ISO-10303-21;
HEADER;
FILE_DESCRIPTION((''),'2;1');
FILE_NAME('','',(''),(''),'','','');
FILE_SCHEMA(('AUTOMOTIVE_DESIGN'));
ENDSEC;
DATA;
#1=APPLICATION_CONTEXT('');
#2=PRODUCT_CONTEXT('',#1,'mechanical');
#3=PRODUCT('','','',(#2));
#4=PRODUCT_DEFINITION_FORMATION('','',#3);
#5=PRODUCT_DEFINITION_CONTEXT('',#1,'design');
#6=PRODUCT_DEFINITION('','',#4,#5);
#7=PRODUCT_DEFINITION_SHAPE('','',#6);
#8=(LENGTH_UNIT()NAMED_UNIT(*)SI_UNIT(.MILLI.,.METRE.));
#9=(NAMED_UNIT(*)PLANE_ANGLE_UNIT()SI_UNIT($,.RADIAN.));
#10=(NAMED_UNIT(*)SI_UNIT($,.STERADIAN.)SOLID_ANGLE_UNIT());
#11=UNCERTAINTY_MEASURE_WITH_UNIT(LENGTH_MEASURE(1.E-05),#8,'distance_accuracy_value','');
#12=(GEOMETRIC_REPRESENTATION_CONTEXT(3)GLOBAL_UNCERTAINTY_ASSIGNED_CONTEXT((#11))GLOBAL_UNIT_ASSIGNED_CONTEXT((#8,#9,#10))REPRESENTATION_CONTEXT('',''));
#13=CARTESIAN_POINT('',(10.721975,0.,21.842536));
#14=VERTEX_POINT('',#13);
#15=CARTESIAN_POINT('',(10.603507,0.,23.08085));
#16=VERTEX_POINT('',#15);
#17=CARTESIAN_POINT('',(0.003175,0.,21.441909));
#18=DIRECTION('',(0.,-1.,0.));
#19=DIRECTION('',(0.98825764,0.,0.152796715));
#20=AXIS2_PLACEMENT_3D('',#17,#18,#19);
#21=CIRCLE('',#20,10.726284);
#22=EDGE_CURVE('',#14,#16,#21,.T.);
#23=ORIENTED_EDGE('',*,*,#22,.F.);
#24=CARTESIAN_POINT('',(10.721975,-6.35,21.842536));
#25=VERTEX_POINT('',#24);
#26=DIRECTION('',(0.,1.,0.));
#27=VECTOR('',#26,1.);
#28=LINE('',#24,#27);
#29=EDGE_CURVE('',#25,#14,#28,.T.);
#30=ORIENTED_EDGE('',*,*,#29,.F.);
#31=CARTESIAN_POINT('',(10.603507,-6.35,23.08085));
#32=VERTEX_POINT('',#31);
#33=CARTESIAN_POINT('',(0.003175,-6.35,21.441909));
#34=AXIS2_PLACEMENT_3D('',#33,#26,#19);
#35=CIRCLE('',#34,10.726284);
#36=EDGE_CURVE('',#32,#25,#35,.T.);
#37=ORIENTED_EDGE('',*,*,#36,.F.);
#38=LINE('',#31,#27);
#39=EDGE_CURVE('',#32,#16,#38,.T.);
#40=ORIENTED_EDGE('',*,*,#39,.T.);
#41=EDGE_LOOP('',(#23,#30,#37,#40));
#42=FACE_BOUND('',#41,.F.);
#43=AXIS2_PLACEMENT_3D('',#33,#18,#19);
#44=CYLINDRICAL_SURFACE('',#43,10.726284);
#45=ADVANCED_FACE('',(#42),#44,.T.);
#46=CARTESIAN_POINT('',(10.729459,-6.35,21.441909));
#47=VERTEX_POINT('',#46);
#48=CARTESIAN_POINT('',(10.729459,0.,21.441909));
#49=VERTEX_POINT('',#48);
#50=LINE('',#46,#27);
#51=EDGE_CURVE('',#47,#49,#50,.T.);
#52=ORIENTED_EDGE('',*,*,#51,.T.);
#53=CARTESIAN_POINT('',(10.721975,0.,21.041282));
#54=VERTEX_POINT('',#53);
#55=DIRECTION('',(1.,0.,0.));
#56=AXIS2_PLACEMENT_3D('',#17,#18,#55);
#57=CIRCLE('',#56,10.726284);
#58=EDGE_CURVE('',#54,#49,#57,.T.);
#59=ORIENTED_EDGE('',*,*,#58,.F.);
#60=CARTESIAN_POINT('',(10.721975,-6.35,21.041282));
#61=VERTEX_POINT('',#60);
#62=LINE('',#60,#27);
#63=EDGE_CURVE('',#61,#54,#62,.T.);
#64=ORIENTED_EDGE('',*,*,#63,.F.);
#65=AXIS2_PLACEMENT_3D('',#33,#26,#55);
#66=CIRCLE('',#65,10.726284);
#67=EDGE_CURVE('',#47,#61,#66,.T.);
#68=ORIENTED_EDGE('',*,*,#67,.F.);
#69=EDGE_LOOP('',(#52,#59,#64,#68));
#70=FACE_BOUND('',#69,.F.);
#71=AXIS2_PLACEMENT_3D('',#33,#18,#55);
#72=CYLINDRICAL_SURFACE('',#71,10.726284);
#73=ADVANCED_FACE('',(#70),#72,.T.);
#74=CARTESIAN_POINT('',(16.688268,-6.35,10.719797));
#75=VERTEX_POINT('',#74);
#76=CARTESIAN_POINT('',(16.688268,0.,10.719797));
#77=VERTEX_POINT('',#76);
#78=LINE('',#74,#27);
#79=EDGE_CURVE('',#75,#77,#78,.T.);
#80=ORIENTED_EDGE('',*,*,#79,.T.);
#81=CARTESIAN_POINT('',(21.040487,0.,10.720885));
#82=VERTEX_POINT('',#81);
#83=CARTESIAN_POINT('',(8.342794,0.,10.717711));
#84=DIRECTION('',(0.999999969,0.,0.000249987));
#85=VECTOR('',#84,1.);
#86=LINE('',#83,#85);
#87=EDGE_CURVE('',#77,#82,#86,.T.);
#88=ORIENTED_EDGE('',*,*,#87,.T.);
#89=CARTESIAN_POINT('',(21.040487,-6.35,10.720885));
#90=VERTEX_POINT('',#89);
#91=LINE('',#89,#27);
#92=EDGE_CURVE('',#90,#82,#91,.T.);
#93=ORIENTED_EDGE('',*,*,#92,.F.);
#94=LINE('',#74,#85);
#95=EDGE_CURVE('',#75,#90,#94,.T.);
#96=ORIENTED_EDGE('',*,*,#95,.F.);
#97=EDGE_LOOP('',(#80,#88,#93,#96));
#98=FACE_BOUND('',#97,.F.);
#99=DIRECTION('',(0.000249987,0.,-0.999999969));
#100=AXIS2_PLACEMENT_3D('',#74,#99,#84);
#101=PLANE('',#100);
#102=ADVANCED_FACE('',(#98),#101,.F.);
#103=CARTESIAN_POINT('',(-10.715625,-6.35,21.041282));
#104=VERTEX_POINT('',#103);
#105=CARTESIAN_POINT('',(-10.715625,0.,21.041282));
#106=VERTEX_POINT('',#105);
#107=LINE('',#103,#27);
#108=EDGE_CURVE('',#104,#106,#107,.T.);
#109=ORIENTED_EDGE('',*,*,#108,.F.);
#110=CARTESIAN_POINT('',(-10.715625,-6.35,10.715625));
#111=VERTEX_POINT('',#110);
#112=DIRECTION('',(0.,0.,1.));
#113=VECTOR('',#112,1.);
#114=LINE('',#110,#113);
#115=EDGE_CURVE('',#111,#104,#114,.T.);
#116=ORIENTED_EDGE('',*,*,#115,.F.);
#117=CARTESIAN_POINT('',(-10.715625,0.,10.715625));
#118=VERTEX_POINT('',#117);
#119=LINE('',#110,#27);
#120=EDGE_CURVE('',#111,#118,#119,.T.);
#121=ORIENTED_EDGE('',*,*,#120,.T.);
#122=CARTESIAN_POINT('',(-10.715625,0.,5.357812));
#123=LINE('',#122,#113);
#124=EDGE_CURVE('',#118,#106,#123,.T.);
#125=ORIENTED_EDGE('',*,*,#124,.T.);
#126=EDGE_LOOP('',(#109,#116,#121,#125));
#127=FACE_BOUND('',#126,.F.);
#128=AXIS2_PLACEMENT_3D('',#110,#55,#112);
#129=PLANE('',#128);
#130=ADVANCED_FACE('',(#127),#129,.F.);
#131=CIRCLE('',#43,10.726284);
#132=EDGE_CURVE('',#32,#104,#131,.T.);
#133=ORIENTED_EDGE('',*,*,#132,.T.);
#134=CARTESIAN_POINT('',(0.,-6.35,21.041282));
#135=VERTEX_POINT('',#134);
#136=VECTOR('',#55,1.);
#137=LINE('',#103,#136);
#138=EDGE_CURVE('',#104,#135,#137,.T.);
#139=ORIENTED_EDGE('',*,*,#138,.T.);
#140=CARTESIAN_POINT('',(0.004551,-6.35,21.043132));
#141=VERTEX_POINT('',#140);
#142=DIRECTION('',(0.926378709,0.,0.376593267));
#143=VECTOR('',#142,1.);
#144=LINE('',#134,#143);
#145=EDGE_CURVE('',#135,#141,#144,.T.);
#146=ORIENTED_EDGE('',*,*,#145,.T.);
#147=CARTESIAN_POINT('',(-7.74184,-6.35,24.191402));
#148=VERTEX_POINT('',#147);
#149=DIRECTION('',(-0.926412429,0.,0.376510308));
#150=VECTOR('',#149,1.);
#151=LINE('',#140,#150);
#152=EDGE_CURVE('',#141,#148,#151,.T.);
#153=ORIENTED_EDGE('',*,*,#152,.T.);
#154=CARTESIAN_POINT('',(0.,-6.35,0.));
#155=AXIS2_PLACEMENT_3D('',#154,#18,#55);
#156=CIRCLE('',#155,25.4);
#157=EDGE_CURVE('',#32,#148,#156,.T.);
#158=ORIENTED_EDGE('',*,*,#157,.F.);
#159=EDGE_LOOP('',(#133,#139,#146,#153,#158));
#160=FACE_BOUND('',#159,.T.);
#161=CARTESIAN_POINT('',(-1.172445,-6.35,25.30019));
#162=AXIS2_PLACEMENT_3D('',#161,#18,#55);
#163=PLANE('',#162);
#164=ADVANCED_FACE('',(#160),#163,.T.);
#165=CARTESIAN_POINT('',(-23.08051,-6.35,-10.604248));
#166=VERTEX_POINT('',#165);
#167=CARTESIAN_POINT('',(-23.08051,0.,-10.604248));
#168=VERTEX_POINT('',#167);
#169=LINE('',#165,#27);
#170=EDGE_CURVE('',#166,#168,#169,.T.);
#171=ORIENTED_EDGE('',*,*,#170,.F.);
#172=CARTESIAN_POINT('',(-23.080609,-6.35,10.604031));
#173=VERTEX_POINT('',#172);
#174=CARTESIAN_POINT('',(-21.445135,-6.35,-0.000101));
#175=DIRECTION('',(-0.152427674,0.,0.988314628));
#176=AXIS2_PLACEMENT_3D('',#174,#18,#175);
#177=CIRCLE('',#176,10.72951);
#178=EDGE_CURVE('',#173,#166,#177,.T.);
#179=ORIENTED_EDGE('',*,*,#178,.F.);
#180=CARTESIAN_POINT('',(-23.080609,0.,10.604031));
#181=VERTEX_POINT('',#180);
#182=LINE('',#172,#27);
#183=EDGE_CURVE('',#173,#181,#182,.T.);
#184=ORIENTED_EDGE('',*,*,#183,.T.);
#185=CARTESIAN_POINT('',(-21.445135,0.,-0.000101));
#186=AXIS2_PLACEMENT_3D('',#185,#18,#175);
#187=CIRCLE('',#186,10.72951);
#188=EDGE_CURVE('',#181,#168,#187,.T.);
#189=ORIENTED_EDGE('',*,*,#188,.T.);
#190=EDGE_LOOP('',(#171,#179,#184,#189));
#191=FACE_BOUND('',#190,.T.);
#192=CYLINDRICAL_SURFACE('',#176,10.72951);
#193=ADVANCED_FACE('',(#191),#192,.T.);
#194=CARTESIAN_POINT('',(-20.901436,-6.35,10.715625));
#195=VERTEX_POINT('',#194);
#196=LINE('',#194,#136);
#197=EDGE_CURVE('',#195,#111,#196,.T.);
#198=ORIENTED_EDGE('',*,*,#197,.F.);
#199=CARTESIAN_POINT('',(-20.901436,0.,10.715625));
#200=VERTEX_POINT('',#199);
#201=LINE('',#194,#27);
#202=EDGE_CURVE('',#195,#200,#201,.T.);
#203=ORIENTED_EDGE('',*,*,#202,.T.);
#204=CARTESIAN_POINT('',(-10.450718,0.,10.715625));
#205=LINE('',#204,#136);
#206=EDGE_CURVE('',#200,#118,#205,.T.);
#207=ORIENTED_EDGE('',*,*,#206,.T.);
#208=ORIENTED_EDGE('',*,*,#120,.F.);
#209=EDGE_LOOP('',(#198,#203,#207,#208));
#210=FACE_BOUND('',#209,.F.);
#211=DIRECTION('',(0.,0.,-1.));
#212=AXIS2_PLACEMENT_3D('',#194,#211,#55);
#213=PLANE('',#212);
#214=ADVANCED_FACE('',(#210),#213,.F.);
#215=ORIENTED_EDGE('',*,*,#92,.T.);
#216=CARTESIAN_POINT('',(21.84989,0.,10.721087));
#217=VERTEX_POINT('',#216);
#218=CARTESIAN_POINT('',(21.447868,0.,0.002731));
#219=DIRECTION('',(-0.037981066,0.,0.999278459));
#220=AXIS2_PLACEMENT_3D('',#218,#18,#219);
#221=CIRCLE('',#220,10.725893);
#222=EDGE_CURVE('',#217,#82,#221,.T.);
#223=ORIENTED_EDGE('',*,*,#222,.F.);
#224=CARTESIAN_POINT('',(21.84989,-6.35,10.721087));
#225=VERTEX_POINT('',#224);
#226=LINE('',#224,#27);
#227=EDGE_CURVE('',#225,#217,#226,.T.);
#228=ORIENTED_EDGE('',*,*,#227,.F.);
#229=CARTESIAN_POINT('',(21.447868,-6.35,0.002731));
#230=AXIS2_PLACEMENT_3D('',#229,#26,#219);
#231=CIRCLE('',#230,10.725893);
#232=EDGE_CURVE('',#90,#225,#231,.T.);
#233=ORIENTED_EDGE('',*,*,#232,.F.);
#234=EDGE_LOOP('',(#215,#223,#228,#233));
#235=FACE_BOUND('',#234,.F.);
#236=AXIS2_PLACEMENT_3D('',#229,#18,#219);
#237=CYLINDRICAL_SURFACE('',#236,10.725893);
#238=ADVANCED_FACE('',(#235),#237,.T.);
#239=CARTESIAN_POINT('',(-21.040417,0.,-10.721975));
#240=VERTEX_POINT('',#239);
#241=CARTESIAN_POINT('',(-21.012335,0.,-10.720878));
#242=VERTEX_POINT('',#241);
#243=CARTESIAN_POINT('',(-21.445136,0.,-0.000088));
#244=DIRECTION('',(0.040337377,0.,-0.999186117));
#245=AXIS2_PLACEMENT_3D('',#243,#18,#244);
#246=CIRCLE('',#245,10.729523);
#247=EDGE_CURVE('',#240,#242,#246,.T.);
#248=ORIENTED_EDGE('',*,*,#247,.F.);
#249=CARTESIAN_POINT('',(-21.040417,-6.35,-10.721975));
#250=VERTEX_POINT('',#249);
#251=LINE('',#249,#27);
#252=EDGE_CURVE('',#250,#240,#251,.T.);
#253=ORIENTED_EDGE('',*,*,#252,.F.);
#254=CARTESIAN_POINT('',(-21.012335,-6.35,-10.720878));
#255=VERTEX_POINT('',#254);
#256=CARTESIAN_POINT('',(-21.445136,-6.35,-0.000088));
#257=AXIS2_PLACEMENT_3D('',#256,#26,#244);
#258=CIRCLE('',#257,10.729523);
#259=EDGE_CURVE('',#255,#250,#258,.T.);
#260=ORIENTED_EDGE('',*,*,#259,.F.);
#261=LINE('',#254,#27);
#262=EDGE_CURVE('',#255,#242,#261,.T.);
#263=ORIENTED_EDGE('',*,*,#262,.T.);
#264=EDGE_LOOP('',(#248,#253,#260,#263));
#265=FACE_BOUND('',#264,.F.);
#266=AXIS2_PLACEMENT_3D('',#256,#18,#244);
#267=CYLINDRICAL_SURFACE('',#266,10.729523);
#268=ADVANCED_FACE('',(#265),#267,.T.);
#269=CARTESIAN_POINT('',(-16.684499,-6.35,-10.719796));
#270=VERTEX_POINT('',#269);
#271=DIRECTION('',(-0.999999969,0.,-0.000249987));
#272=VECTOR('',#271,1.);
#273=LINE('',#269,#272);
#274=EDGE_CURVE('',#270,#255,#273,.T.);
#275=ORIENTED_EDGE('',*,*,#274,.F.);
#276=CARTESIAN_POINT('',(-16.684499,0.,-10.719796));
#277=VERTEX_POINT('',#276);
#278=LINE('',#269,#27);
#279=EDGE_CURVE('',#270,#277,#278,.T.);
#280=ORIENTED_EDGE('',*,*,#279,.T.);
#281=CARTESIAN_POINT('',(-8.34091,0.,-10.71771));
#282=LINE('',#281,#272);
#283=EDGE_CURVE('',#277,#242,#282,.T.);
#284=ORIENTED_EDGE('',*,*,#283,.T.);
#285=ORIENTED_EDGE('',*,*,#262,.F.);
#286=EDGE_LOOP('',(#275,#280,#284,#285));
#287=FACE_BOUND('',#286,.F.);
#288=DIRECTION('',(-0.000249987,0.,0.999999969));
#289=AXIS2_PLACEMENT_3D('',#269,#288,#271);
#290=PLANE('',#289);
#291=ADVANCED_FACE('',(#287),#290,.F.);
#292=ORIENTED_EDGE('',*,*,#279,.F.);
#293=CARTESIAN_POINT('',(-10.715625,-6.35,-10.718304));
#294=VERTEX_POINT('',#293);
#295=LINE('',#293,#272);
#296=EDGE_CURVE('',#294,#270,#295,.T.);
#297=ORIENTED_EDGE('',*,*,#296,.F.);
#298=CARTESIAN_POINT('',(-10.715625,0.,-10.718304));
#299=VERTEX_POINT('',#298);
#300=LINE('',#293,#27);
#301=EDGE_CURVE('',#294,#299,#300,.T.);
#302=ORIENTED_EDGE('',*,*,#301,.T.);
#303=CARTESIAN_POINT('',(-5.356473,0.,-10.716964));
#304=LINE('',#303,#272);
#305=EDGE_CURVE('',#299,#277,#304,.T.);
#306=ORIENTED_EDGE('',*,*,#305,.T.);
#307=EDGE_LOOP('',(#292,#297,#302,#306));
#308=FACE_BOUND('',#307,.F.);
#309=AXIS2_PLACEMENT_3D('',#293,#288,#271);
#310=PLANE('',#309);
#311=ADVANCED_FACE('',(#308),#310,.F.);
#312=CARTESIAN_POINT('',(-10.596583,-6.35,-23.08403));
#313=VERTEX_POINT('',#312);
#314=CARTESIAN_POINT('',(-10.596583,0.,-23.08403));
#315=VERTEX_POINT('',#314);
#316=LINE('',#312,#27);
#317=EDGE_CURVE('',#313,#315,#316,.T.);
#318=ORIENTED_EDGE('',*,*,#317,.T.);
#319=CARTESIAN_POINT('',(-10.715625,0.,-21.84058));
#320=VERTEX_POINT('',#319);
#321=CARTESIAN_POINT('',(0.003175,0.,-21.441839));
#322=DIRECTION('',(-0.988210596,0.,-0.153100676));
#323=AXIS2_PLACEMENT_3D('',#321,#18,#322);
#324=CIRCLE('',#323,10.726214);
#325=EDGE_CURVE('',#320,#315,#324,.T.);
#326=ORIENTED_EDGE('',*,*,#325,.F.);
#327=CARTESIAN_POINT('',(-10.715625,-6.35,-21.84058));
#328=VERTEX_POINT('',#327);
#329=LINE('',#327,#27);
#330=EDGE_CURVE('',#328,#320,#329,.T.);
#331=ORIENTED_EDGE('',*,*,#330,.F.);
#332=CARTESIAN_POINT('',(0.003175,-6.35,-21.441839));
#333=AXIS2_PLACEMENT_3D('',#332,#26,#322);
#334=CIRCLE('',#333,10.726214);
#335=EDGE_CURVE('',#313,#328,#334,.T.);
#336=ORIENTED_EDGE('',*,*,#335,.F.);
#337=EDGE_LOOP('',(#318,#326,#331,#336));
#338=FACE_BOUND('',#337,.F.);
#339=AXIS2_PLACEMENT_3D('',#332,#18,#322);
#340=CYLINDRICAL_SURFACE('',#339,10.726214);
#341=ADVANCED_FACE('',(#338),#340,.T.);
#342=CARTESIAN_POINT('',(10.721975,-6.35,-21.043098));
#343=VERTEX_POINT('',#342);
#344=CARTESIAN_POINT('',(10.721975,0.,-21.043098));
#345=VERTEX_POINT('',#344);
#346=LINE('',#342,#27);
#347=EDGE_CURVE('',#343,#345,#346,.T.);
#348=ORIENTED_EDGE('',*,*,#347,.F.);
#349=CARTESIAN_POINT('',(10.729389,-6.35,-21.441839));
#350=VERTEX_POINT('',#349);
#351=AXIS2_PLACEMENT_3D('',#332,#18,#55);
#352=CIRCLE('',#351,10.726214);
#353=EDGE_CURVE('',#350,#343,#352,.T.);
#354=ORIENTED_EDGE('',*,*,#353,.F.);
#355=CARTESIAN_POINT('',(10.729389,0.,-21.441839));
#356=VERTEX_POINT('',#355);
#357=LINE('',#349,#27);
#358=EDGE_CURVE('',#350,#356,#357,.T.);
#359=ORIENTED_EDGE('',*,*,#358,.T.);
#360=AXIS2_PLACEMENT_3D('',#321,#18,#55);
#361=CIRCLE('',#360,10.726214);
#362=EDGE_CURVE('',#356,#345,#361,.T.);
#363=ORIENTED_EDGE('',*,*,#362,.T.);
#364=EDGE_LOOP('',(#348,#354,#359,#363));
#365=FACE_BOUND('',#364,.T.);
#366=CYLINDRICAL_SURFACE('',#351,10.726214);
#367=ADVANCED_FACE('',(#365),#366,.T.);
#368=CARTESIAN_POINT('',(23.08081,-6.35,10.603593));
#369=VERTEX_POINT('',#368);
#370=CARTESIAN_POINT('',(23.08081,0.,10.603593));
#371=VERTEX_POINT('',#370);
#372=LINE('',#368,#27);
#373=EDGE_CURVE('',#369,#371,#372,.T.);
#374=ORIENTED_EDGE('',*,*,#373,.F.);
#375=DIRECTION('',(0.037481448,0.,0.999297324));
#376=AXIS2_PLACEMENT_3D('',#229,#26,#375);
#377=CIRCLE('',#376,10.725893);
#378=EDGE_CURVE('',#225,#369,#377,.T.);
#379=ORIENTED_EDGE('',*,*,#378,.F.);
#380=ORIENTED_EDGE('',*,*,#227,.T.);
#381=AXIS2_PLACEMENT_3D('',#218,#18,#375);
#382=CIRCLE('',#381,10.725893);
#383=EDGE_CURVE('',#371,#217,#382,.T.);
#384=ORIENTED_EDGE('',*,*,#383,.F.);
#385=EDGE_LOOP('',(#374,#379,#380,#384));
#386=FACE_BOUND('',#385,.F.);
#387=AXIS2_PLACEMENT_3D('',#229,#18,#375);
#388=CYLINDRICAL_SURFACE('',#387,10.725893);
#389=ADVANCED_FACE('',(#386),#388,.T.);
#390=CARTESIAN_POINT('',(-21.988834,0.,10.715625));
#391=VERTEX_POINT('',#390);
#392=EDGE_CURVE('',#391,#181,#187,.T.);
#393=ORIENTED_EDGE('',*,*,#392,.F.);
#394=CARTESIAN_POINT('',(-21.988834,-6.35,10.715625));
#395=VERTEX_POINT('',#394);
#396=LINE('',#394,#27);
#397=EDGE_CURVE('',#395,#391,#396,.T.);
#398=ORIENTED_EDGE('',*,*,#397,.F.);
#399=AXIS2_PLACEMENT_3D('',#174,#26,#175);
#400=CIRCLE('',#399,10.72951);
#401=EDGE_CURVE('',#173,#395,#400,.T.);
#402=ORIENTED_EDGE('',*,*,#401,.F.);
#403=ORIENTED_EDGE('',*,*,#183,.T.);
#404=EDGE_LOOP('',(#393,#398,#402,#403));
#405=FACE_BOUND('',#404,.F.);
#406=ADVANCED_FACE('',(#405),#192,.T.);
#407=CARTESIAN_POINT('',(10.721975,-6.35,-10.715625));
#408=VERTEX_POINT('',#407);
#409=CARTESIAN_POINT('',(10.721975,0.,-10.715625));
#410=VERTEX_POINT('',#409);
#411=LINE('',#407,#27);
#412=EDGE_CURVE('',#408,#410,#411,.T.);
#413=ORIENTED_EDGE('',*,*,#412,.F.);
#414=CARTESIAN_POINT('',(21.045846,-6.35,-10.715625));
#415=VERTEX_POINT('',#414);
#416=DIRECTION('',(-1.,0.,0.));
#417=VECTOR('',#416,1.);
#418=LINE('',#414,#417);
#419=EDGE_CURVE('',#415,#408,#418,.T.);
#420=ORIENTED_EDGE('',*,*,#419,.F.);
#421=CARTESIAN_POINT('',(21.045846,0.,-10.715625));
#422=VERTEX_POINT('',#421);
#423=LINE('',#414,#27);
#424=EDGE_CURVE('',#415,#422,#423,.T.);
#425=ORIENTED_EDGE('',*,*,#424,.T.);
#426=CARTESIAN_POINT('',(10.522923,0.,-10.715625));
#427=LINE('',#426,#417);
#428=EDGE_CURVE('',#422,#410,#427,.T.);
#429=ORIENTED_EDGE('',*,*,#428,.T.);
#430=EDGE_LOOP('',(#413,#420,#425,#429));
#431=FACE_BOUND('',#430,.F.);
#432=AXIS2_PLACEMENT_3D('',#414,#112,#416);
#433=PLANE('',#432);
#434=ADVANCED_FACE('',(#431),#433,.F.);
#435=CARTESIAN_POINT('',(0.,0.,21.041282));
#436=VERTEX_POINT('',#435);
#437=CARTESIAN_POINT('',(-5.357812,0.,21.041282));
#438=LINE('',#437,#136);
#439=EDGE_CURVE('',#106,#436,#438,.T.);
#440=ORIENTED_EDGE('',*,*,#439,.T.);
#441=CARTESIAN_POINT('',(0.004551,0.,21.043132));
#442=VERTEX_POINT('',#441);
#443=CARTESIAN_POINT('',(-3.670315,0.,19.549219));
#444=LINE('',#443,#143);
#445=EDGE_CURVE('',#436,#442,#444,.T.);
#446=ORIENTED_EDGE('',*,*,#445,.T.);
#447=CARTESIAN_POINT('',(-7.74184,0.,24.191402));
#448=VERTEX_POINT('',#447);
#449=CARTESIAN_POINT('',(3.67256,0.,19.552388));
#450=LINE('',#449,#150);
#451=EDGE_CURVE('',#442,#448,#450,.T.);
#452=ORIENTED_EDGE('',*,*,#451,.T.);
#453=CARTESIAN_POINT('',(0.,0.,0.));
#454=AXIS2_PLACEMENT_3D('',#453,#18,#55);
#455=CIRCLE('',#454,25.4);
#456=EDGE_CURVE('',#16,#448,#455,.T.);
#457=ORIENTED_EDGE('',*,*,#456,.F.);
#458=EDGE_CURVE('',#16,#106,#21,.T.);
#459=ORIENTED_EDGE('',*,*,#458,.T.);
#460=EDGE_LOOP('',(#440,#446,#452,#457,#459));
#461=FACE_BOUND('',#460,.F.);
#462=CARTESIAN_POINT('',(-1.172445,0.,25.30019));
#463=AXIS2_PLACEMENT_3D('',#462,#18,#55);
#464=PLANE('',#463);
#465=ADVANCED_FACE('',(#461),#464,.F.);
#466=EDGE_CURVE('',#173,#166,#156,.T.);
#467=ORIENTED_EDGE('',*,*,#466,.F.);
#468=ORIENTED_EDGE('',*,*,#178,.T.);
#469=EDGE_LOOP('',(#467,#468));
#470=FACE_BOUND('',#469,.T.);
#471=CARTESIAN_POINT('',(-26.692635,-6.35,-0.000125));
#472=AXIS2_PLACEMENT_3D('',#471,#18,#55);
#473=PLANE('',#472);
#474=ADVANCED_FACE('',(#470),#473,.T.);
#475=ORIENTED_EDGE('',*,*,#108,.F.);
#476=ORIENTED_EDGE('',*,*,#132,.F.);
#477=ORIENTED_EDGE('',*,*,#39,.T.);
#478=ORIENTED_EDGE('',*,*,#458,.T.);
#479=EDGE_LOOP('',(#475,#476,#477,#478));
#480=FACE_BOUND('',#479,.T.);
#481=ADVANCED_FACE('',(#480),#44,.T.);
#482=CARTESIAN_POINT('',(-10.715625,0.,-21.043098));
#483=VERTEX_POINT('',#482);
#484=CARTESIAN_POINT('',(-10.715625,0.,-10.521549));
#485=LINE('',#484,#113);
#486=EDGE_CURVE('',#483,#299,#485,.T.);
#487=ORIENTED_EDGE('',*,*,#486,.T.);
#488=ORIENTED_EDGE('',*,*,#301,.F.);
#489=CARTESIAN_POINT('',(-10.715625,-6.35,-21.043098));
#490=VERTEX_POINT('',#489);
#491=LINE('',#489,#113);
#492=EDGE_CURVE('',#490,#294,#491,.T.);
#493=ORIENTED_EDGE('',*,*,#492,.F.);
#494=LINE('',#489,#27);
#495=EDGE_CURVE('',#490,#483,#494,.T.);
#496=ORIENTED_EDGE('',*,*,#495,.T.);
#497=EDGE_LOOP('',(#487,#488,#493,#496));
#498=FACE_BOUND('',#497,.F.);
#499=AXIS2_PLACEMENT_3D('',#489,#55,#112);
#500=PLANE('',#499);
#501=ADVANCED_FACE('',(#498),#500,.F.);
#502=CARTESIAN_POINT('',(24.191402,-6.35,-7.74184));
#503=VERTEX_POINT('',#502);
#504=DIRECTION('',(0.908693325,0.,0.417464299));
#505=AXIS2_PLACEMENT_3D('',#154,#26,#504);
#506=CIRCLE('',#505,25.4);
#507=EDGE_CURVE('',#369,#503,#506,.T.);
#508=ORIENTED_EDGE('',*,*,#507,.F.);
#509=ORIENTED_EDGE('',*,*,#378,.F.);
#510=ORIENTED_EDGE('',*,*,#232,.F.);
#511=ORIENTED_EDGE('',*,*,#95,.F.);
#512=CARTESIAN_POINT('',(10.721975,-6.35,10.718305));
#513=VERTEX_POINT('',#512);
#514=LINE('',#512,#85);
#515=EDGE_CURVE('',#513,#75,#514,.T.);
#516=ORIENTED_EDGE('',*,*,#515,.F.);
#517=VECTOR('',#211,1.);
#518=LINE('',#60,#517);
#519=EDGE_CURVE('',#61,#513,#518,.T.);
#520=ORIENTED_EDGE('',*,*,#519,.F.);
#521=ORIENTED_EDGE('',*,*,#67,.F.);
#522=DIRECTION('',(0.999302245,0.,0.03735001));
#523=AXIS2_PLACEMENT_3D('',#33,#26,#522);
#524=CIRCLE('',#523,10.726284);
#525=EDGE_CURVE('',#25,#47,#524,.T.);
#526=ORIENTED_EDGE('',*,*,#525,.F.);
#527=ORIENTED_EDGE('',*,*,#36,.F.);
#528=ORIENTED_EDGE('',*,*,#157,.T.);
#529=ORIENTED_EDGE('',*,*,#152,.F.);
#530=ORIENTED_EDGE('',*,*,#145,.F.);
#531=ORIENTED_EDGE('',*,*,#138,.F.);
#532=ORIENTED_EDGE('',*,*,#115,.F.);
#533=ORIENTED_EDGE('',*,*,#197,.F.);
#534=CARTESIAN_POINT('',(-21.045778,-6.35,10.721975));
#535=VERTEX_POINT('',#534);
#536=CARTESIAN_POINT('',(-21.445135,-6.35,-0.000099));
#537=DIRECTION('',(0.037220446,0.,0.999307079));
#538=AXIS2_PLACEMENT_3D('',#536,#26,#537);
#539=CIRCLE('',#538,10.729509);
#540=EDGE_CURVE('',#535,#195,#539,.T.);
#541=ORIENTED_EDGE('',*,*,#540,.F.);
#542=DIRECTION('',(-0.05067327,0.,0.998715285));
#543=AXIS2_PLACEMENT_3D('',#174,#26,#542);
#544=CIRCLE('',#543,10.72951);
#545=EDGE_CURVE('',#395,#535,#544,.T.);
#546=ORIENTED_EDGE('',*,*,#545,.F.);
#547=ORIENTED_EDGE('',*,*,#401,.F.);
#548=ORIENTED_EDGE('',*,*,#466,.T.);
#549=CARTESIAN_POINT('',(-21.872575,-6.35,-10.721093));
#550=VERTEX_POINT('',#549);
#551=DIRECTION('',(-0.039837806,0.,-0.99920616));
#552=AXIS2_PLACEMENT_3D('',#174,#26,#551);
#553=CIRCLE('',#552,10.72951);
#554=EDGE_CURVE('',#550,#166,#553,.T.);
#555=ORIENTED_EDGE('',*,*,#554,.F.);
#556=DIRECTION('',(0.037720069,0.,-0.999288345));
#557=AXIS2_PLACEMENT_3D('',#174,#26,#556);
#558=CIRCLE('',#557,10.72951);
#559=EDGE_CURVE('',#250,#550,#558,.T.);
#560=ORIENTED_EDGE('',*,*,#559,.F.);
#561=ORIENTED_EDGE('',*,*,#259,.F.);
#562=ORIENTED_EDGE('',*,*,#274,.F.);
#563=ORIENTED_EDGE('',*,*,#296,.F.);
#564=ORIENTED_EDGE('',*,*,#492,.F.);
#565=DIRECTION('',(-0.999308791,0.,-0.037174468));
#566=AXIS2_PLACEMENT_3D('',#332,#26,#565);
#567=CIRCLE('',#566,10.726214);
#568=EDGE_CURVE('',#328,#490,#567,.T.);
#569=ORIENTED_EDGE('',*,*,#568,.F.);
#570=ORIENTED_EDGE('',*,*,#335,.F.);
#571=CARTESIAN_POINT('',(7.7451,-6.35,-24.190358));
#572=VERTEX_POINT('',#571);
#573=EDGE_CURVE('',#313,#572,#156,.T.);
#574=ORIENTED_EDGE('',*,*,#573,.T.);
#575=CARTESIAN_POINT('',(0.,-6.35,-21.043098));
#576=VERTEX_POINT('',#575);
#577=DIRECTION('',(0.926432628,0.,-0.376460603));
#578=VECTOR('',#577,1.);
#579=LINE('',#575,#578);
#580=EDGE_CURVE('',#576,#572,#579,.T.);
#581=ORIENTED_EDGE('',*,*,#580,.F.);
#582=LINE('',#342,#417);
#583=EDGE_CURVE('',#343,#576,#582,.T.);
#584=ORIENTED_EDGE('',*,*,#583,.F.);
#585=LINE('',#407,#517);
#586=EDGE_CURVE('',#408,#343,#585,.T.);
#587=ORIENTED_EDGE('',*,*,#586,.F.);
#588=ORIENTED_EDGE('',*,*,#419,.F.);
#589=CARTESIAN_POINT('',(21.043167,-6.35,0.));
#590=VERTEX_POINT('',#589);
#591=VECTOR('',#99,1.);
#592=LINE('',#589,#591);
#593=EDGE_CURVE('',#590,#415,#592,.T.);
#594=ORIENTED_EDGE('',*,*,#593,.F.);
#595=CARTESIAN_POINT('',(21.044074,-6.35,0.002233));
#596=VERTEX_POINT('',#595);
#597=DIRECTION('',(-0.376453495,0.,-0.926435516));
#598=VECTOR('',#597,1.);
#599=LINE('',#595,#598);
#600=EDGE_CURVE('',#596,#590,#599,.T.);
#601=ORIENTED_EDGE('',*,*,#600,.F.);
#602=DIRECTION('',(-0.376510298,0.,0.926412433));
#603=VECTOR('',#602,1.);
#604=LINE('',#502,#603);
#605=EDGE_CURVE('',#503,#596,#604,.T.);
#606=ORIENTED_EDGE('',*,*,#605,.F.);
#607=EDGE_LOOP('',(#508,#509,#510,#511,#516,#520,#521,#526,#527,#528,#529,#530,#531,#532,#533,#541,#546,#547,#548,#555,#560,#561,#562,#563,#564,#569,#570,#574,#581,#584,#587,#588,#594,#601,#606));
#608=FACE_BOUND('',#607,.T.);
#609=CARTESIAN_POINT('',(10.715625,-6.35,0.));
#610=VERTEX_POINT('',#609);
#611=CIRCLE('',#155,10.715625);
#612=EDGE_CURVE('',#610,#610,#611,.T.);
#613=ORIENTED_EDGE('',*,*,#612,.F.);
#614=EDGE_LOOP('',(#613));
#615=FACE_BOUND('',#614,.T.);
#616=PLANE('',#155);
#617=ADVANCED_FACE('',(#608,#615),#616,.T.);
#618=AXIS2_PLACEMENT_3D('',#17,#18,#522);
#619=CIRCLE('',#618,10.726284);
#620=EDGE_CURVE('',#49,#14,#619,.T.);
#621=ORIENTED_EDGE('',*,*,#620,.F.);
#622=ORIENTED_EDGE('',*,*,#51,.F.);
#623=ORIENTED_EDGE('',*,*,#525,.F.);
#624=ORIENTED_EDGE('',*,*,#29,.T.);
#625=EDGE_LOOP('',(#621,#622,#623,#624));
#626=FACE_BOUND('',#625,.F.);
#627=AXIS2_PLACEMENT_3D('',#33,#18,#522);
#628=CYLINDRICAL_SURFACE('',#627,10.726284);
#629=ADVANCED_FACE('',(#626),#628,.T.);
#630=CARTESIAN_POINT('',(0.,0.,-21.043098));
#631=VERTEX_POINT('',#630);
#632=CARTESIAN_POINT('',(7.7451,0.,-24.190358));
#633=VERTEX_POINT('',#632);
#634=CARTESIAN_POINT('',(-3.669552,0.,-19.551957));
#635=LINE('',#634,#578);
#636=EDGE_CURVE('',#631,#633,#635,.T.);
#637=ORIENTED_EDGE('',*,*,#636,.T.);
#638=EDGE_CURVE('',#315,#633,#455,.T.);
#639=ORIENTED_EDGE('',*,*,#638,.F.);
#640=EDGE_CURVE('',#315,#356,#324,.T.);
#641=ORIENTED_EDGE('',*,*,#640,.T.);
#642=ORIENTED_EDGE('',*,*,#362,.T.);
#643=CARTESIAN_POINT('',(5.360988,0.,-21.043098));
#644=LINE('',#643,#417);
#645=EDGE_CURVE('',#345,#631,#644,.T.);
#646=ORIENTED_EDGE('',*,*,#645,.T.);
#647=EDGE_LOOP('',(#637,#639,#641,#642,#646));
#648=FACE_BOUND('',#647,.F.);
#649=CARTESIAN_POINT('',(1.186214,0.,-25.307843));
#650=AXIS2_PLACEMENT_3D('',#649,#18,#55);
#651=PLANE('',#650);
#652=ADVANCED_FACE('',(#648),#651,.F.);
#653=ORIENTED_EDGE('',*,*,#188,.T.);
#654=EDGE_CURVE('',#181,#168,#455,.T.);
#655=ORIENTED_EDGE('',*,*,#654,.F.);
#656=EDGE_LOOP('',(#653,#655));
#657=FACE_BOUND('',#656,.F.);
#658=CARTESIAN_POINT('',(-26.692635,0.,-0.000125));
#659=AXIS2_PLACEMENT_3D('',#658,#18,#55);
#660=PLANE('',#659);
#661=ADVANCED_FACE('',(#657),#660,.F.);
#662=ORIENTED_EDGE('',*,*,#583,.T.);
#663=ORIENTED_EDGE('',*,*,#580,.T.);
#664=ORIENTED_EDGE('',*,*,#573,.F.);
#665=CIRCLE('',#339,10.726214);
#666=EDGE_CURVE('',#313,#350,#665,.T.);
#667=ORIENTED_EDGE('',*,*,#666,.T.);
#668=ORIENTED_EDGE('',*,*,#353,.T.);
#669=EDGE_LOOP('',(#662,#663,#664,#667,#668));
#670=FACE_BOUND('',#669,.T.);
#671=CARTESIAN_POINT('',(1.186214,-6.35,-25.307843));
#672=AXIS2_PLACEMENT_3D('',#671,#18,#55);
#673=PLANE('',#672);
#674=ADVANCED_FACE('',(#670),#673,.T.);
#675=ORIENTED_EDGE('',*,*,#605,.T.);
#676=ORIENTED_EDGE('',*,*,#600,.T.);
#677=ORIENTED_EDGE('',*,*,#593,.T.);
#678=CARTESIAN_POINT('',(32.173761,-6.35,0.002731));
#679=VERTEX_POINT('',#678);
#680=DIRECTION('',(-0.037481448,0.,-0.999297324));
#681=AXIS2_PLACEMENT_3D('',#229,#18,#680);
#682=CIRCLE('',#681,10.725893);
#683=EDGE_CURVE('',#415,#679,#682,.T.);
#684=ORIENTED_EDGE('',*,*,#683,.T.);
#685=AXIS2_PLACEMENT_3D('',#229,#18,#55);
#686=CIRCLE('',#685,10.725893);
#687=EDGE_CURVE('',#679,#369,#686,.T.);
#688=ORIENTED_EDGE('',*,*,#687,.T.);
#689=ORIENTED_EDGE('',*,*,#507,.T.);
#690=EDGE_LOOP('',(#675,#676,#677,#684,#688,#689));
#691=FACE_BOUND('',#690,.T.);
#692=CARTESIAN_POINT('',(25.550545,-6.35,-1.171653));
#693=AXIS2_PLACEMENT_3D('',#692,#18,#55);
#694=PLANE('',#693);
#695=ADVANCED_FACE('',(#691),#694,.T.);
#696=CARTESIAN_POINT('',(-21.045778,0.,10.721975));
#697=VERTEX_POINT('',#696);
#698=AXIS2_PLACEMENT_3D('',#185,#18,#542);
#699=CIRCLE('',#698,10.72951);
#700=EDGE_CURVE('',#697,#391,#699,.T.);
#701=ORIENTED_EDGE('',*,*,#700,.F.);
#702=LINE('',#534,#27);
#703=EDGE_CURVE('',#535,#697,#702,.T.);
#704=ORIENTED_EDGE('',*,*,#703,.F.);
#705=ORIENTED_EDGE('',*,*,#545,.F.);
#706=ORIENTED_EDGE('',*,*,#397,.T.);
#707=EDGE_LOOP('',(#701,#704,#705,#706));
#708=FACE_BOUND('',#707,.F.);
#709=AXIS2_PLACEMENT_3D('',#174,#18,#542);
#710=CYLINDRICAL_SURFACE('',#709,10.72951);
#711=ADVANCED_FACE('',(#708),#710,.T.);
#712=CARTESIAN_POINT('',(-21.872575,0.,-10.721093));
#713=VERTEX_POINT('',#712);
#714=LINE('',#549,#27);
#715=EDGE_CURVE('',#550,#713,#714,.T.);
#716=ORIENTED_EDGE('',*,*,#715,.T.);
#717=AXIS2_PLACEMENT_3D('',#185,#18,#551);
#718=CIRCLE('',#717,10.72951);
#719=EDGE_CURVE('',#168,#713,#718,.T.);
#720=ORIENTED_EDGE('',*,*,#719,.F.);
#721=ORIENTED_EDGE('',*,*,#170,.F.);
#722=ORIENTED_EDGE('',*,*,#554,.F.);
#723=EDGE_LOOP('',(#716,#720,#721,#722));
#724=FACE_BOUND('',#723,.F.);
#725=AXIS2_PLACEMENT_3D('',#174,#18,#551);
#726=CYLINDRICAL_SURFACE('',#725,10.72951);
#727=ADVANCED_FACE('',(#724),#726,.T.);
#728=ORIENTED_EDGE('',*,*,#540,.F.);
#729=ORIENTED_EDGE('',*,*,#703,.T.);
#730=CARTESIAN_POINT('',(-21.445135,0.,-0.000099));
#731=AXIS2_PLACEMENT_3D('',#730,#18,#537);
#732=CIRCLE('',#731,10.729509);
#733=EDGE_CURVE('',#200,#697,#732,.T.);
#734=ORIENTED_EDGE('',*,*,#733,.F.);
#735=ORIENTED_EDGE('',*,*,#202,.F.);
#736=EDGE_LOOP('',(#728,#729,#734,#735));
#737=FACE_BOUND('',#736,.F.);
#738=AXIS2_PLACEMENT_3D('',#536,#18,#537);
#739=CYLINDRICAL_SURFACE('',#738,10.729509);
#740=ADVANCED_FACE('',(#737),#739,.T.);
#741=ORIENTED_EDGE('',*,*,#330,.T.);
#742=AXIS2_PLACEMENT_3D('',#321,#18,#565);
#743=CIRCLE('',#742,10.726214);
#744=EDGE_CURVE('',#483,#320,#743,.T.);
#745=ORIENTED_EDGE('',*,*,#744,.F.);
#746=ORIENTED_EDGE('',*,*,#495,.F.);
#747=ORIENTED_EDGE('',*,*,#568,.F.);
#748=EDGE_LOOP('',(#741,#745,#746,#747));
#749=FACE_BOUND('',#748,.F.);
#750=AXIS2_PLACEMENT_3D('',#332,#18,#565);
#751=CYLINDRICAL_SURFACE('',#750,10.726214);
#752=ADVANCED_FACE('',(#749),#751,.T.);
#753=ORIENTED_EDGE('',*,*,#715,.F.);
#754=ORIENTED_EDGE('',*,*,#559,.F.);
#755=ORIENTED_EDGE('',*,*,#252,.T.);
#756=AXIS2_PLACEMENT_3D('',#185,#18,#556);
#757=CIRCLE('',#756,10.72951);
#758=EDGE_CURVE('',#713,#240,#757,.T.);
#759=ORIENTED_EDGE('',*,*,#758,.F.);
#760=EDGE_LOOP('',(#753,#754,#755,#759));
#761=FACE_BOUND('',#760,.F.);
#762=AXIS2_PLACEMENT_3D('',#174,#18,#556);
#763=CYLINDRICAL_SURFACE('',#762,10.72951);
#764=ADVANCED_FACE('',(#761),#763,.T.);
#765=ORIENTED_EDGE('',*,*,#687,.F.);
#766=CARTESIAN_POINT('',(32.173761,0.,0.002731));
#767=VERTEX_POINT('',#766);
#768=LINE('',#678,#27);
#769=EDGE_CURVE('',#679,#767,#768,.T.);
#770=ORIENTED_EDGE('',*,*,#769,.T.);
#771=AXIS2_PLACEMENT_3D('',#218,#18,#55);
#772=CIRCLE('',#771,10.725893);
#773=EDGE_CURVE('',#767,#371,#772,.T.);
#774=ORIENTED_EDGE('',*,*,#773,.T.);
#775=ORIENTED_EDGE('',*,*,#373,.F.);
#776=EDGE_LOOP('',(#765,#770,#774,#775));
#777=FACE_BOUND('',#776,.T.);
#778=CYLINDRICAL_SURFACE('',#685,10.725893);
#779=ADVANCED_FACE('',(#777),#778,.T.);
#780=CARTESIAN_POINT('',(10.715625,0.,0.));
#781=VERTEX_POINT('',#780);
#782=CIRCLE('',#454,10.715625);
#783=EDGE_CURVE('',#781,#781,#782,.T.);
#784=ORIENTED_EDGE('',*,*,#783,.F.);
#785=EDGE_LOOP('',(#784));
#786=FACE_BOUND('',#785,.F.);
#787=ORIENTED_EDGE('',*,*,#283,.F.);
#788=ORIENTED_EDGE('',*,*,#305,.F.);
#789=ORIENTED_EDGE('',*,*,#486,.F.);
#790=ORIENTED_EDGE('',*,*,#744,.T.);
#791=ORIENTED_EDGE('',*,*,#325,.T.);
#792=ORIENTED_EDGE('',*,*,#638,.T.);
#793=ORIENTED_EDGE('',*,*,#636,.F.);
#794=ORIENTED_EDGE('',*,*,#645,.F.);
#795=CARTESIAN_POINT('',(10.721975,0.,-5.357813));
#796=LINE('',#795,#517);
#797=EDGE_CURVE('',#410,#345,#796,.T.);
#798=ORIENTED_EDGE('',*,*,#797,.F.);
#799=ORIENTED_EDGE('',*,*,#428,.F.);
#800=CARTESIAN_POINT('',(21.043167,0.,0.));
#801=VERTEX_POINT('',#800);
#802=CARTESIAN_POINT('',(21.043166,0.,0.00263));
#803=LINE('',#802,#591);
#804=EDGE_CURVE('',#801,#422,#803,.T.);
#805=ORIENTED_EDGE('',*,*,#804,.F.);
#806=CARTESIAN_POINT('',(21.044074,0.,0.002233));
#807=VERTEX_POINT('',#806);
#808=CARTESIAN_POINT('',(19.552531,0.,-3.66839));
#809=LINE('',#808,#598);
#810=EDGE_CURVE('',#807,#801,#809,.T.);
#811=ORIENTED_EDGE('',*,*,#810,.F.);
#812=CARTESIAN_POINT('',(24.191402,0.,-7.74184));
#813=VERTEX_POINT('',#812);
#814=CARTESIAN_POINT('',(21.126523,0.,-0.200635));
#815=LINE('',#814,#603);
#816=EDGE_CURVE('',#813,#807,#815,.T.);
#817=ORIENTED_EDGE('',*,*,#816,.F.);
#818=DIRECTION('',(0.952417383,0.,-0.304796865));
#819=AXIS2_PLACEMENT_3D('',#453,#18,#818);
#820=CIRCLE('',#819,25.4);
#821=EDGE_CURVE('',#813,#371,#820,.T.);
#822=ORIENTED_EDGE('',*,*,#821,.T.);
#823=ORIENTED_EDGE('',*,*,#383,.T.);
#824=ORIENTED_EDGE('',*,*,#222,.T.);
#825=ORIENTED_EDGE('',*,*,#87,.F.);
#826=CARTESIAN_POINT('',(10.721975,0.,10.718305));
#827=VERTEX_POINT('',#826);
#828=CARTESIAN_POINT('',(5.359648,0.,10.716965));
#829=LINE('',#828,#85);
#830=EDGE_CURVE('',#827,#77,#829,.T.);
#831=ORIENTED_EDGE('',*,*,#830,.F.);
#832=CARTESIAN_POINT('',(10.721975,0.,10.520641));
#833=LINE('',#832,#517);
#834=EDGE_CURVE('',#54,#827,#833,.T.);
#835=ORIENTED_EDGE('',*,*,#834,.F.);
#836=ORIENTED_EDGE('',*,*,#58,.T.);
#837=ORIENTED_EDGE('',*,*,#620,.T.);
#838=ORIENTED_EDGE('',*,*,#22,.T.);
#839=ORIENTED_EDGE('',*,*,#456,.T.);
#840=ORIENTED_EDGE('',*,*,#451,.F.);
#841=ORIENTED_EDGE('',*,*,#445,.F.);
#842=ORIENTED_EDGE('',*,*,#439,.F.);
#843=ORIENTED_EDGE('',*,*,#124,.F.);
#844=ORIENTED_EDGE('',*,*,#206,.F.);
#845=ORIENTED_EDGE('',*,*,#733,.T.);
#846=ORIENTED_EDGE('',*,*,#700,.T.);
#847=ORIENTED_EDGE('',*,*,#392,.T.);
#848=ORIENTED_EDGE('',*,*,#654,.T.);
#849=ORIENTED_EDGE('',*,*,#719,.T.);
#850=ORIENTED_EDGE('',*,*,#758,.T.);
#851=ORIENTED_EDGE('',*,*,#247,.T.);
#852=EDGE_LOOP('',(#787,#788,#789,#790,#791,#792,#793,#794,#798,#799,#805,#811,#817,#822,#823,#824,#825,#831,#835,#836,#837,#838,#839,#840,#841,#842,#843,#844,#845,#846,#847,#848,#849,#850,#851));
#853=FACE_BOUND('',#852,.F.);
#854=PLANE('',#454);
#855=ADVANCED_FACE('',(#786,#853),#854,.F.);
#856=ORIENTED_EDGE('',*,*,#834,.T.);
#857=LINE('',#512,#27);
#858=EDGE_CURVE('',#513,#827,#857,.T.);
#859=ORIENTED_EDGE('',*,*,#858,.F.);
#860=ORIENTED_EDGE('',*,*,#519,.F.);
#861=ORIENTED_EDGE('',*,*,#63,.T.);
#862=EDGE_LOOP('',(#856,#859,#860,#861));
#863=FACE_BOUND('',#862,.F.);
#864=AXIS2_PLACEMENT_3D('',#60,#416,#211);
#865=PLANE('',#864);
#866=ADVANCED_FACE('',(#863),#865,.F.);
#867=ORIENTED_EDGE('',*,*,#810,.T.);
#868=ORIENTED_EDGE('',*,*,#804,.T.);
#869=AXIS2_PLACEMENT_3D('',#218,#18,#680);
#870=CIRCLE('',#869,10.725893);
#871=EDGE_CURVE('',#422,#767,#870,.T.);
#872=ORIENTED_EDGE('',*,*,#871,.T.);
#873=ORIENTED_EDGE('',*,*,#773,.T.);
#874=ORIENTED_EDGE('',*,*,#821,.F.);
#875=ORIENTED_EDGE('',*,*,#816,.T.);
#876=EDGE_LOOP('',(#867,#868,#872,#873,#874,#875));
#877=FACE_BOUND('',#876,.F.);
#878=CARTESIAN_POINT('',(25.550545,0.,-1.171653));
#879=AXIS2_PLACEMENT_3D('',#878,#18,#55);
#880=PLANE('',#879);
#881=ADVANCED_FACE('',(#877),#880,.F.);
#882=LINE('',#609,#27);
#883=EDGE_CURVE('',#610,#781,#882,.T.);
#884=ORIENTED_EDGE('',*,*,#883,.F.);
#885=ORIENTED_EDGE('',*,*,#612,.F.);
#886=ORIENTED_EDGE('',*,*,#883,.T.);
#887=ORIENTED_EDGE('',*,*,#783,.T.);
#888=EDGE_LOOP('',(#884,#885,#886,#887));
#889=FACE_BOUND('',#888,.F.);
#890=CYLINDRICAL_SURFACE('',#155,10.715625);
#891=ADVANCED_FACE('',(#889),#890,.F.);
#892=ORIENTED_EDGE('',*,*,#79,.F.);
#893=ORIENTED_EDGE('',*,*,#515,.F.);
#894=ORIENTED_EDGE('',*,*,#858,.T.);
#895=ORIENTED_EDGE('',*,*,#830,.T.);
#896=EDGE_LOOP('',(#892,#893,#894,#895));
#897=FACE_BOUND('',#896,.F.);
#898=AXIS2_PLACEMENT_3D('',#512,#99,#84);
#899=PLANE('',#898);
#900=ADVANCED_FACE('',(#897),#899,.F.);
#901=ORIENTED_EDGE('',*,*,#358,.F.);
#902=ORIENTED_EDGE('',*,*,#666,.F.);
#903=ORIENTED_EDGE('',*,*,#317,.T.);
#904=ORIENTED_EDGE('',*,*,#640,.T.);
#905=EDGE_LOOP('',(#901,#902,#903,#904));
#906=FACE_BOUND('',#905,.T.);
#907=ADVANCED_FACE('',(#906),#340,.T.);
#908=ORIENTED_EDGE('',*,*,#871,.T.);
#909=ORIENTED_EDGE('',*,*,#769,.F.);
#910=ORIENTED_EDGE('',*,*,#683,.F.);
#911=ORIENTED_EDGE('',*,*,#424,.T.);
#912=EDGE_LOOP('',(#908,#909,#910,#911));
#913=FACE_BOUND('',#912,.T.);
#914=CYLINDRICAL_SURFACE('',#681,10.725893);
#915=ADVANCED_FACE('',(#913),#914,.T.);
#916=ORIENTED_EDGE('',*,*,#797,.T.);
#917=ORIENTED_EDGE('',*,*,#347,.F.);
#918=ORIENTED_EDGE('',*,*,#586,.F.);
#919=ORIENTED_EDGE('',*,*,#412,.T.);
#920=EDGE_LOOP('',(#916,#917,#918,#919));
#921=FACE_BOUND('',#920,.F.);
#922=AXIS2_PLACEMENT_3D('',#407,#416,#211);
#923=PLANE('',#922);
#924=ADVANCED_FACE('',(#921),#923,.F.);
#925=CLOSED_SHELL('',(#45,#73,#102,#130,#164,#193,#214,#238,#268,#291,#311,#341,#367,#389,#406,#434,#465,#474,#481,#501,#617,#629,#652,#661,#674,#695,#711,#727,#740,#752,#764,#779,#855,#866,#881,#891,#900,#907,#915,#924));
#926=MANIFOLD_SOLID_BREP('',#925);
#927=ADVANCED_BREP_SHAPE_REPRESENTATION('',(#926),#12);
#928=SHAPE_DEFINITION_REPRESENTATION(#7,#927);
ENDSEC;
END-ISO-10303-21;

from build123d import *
from build123d import SkipClean  # not in build123d's __all__

# Parameters (mm, degrees)
F0_R     = 25.4
F1_DEPTH = 6.35
F2_R     = 10.715625
F3_DEPTH = 6.351
F5_DEPTH = 6.351
F7_DEPTH = 6.35


# Not quite as in the source:
# - ends of sketch curves that miss each other by under 0.0002 mm in the source are joined


with BuildPart() as f1:
    # F0 (on Front) → F1 (new body)
    with BuildSketch(Plane.XZ):
        Circle(F0_R)
    extrude(amount=F1_DEPTH)

    # F2 (on face) → F3 (cut, through all)
    with BuildSketch(Plane.XZ.offset(6.35)):
        Circle(F2_R)
    extrude(amount=-F3_DEPTH, mode=Mode.SUBTRACT)

    # F4 (on face) → F5 (cut, through all)
    with BuildSketch(Plane.XZ.offset(6.35)):
        Polygon((-16.6851454689, 10.715625), (-10.715625, 10.715625), (-10.715625, 16.6851454689), (-14.959796627, 14.959796627), align=None)
        with BuildLine():
            Line((-14.959796627, 14.959796627), (-10.715625, 16.6851454689))
            Line((-10.715625, 16.6851454689), (-10.715625, 21.0412820273))
            ThreePointArc((-10.715625, 21.0412820273), (-10.7231093189, 21.441908849), (-10.715625, 21.8425356707))
            Line((-10.715625, 21.8425356707), (-10.715625, 23.0290117213))
            ThreePointArc((-10.715625, 23.0290117213), (-11.3239040523, 22.7360769926), (-11.9241826151, 22.4270789217))
            Line((-11.9241826151, 22.4270789217), (-14.959796627, 14.959796627))
        make_face()
        with BuildLine():
            Line((-20.9014356742, 10.715625), (-16.6851454689, 10.715625))
            Line((-16.6851454689, 10.715625), (-14.959796627, 14.959796627))
            Line((-14.959796627, 14.959796627), (-22.4270789217, 11.9241826151))
            ThreePointArc((-22.4270789217, 11.9241826151), (-22.7360769926, 11.3239040523), (-23.0290117213, 10.715625))
            Line((-23.0290117213, 10.715625), (-21.9888344018, 10.715625))
            ThreePointArc((-21.9888344018, 10.715625), (-21.517375938, 10.7291661682), (-21.0457778798, 10.7219746652))
            ThreePointArc((-21.0457778798, 10.7219746652), (-20.9735960889, 10.7190427964), (-20.9014356742, 10.715625))
        make_face()
        Polygon((-10.715625, -16.6889140547), (-10.715625, -10.7183040998), (-16.6844990564, -10.7197962397), (-14.9584916016, -14.9648416016), align=None)
        Polygon((10.721975, 16.6873822364), (10.721975, 10.7183053524), (16.6882676196, 10.7197968469), (14.9635371125, 14.9635367777), align=None)
        with BuildLine():
            ThreePointArc((-10.715625, 21.8425356707), (-10.7231093189, 21.441908849), (-10.715625, 21.0412820273))
            Line((-10.715625, 21.0412820273), (-10.715625, 21.8425356707))
        make_face()
        with BuildLine():
            Line((-10.715625, 21.8425356707), (-10.715625, 21.0412820273))
            Line((-10.715625, 21.0412820273), (0, 21.0412820273))
            Line((0, 21.0412820273), (0.0045507281, 21.0431319981))
            Line((0.0045507281, 21.0431319981), (-7.7418402479, 24.1914015629))
            ThreePointArc((-7.7418402479, 24.1914015629), (-9.1859591102, 23.6807549547), (-10.596671596, 23.0839890635))
            ThreePointArc((-10.596671596, 23.0839890635), (-10.6742064582, 22.4649926613), (-10.715625, 21.8425356707))
        make_face()
        with BuildLine():
            Line((-22.4270789217, 11.9241826151), (-14.959796627, 14.959796627))
            Line((-14.959796627, 14.959796627), (-11.9241826151, 22.4270789217))
            ThreePointArc((-11.9241826151, 22.4270789217), (-17.9605122421, 17.9605122421), (-22.4270789217, 11.9241826151))
        make_face()
        with BuildLine():
            Line((-10.715625, -21.0430976268), (-10.715625, -16.6889140547))
            Line((-10.715625, -16.6889140547), (-14.9584916016, -14.9648416016))
            Line((-14.9584916016, -14.9648416016), (-11.9244537164, -22.4269347787))
            ThreePointArc((-11.9244537164, -22.4269347787), (-11.3240414708, -22.7360085496), (-10.715625, -23.0290117213))
            Line((-10.715625, -23.0290117213), (-10.715625, -21.8405802232))
            ThreePointArc((-10.715625, -21.8405802232), (-10.7230390601, -21.441838925), (-10.715625, -21.0430976268))
        make_face()
        with BuildLine():
            Line((-14.9584916016, -14.9648416016), (-16.6844990564, -10.7197962397))
            Line((-16.6844990564, -10.7197962397), (-21.0123347342, -10.7208781415))
            ThreePointArc((-21.0123347342, -10.7208781415), (-21.0263755955, -10.7214357653), (-21.0404171751, -10.721975))
            ThreePointArc((-21.0404171751, -10.721975), (-21.4565047306, -10.7296046859), (-21.8725751819, -10.7210931903))
            Line((-21.8725751819, -10.7210931903), (-23.0263322368, -10.7213816143))
            ThreePointArc((-23.0263322368, -10.7213816143), (-22.7327836194, -11.3305140622), (-22.4231246927, -11.9316167813))
            Line((-22.4231246927, -11.9316167813), (-14.9584916016, -14.9648416016))
        make_face()
        Polygon((16.6889139739, -10.7156253348), (10.721975, -10.7156253348), (10.721975, -16.6836133856), (14.9648415328, -14.9584918676), align=None)
        with BuildLine():
            Line((10.721975, 21.0412820273), (10.721975, 16.6873822364))
            Line((10.721975, 16.6873822364), (14.9635371125, 14.9635367777))
            Line((14.9635371125, 14.9635367777), (11.9318881389, 22.4229802979))
            ThreePointArc((11.9318881389, 22.4229802979), (11.3309445253, 22.7325690621), (10.721975, 23.0260559389))
            Line((10.721975, 23.0260559389), (10.721975, 21.8425356707))
            ThreePointArc((10.721975, 21.8425356707), (10.727588076, 21.6422572114), (10.7294593189, 21.441908849))
            ThreePointArc((10.7294593189, 21.441908849), (10.727588076, 21.2415604866), (10.721975, 21.0412820273))
        make_face()
        with BuildLine():
            Line((14.9635371125, 14.9635367777), (16.6882676196, 10.7197968469))
            Line((16.6882676196, 10.7197968469), (21.0404868941, 10.7208848444))
            ThreePointArc((21.0404868941, 10.7208848444), (21.4451864116, 10.7286236807), (21.8498897476, 10.7210871844))
            Line((21.8498897476, 10.7210871844), (23.0263323927, 10.7213812796))
            ThreePointArc((23.0263323927, 10.7213812796), (22.7327152374, 11.3306512582), (22.4229804989, 11.9318877612))
            Line((22.4229804989, 11.9318877612), (14.9635371125, 14.9635367777))
        make_face()
        with BuildLine():
            Line((-10.715625, 23.0290117213), (-10.715625, 21.8425356707))
            ThreePointArc((-10.715625, 21.8425356707), (-10.6742064582, 22.4649926613), (-10.596671596, 23.0839890635))
            ThreePointArc((-10.596671596, 23.0839890635), (-10.6561837529, 23.0565771055), (-10.715625, 23.0290117213))
        make_face()
        with BuildLine():
            Line((-11.9244537164, -22.4269347787), (-14.9584916016, -14.9648416016))
            Line((-14.9584916016, -14.9648416016), (-22.4231246927, -11.9316167813))
            ThreePointArc((-22.4231246927, -11.9316167813), (-17.9576435149, -17.9633805112), (-11.9244537164, -22.4269347787))
        make_face()
        with BuildLine():
            Line((14.9648415328, -14.9584918676), (10.721975, -16.6836133856))
            Line((10.721975, -16.6836133856), (10.721975, -21.0430976268))
            ThreePointArc((10.721975, -21.0430976268), (10.7275353849, -21.2424338153), (10.7293890601, -21.441838925))
            ThreePointArc((10.7293890601, -21.441838925), (10.7275353849, -21.6412440348), (10.721975, -21.8405802232))
            Line((10.721975, -21.8405802232), (10.721975, -23.0260559389))
            ThreePointArc((10.721975, -23.0260559389), (11.3308069807, -22.7326376201), (11.9316167956, -22.4231246851))
            Line((11.9316167956, -22.4231246851), (14.9648415328, -14.9584918676))
        make_face()
        with BuildLine():
            Line((21.0458457391, -10.7156253348), (16.6889139739, -10.7156253348))
            Line((16.6889139739, -10.7156253348), (14.9648415328, -14.9584918676))
            Line((14.9648415328, -14.9584918676), (22.4269345702, -11.9244541084))
            ThreePointArc((22.4269345702, -11.9244541084), (22.7360083683, -11.3240418348), (23.0290115655, -10.7156253348))
            Line((23.0290115655, -10.7156253348), (21.8498897476, -10.7156253348))
            ThreePointArc((21.8498897476, -10.7156253348), (21.4478677434, -10.7231621662), (21.0458457391, -10.7156253348))
        make_face()
        with BuildLine():
            Line((10.721975, -21.0430976268), (0, -21.0430976268))
            Line((0, -21.0430976268), (7.7450996927, -24.1903582187))
            ThreePointArc((7.7450996927, -24.1903582187), (9.1910155426, -23.678792902), (10.6034192636, -23.0808903624))
            ThreePointArc((10.6034192636, -23.0808903624), (10.6807217402, -22.462458185), (10.721975, -21.8405802232))
            Line((10.721975, -21.8405802232), (10.721975, -21.0430976268))
        make_face()
        with BuildLine():
            ThreePointArc((10.7293890601, -21.441838925), (10.7275353849, -21.2424338153), (10.721975, -21.0430976268))
            Line((10.721975, -21.0430976268), (10.721975, -21.8405802232))
            ThreePointArc((10.721975, -21.8405802232), (10.7275353849, -21.6412440348), (10.7293890601, -21.441838925))
        make_face()
        with BuildLine():
            ThreePointArc((-23.0806092952, 10.6040310525), (-22.536149575, 10.6737961307), (-21.9888344018, 10.715625))
            Line((-21.9888344018, 10.715625), (-23.0290117213, 10.715625))
            ThreePointArc((-23.0290117213, 10.715625), (-23.0548780277, 10.6598592451), (-23.0806092952, 10.6040310525))
        make_face()
        with BuildLine():
            Line((11.9318881389, 22.4229802979), (14.9635371125, 14.9635367777))
            Line((14.9635371125, 14.9635367777), (22.4229804989, 11.9318877612))
            ThreePointArc((22.4229804989, 11.9318877612), (17.9605123934, 17.9605120909), (11.9318881389, 22.4229802979))
        make_face()
        with BuildLine():
            ThreePointArc((10.6035074316, 23.0808498576), (10.6807078337, 22.4634116022), (10.721975, 21.8425356707))
            Line((10.721975, 21.8425356707), (10.721975, 23.0260559389))
            ThreePointArc((10.721975, 23.0260559389), (10.6627764128, 23.053528996), (10.6035074316, 23.0808498576))
        make_face()
        with BuildLine():
            ThreePointArc((-10.5965833938, -23.0840295525), (-10.674220495, -22.4640392514), (-10.715625, -21.8405802232))
            Line((-10.715625, -21.8405802232), (-10.715625, -23.0290117213))
            ThreePointArc((-10.715625, -23.0290117213), (-10.6561397042, -23.0565974637), (-10.5965833938, -23.0840295525))
        make_face()
        with BuildLine():
            Line((-23.0263322368, -10.7213816143), (-21.8725751819, -10.7210931903))
            ThreePointArc((-21.8725751819, -10.7210931903), (-22.4781957728, -10.6797622384), (-23.0805097356, -10.60424775))
            ThreePointArc((-23.0805097356, -10.60424775), (-23.0534953804, -10.6628490914), (-23.0263322368, -10.7213816143))
        make_face()
        with BuildLine():
            Line((22.4269345702, -11.9244541084), (14.9648415328, -14.9584918676))
            Line((14.9648415328, -14.9584918676), (11.9316167956, -22.4231246851))
            ThreePointArc((11.9316167956, -22.4231246851), (17.96338036, -17.9576436662), (22.4269345702, -11.9244541084))
        make_face()
        with BuildLine():
            Line((21.043166974, 0), (21.0458457391, -10.7156253348))
            Line((21.0458457391, -10.7156253348), (21.8498897476, -10.7156253348))
            ThreePointArc((21.8498897476, -10.7156253348), (22.4684041732, -10.6745013006), (23.083509992, -10.5977151524))
            ThreePointArc((23.083509992, -10.5977151524), (23.6805472866, -9.1864944461), (24.19140152, -7.7418403819))
            Line((24.19140152, -7.7418403819), (21.0440741561, 0.0022325353))
            Line((21.0440741561, 0.0022325353), (21.043166974, 0))
        make_face()
        with BuildLine():
            Line((21.8498897476, -10.7156253348), (21.0458457391, -10.7156253348))
            ThreePointArc((21.0458457391, -10.7156253348), (21.4478677434, -10.7231621662), (21.8498897476, -10.7156253348))
        make_face()
        with BuildLine():
            Line((10.721975, -23.0260559389), (10.721975, -21.8405802232))
            ThreePointArc((10.721975, -21.8405802232), (10.6807217402, -22.462458185), (10.6034192636, -23.0808903624))
            ThreePointArc((10.6034192636, -23.0808903624), (10.662732381, -23.0535493617), (10.721975, -23.0260559389))
        make_face()
        with BuildLine():
            Line((23.0263323927, 10.7213812796), (21.8498897476, 10.7210871844))
            ThreePointArc((21.8498897476, 10.7210871844), (22.467044649, 10.680093007), (23.0808104612, 10.603593186))
            ThreePointArc((23.0808104612, 10.603593186), (23.053646654, 10.6625220259), (23.0263323927, 10.7213812796))
        make_face()
        with BuildLine():
            ThreePointArc((23.083509992, -10.5977151524), (22.4684041732, -10.6745013006), (21.8498897476, -10.7156253348))
            Line((21.8498897476, -10.7156253348), (23.0290115655, -10.7156253348))
            ThreePointArc((23.0290115655, -10.7156253348), (23.056336153, -10.6567050818), (23.083509992, -10.5977151524))
        make_face()
    extrude(amount=-F5_DEPTH, mode=Mode.SUBTRACT)

    # F6 (on face) → F7 (join)
    with BuildSketch(Plane.XZ.offset(6.35)):
        with BuildLine():
            ThreePointArc((-23.0805097356, -10.60424775), (-25.3999999997, -0.0001192371), (-23.0806092952, 10.6040310525))
            ThreePointArc((-23.0806092952, 10.6040310525), (-32.1746450763, -0.0001510398), (-23.0805097356, -10.60424775))
        make_face()
        with BuildLine():
            ThreePointArc((-7.7418402479, 24.1914015629), (1.5348016289, 25.353587201), (10.6035074316, 23.0808498576))
            ThreePointArc((10.6035074316, 23.0808498576), (-1.0183277532, 32.1194416828), (-10.715625, 21.0412820273))
            Line((-10.715625, 21.0412820273), (0, 21.0412820273))
            Line((0, 21.0412820273), (0.0045507281, 21.0431319981))
            Line((0.0045507281, 21.0431319981), (-7.7418402479, 24.1914015629))
        make_face()
        with BuildLine():
            ThreePointArc((32.1737608344, 0.0027309248), (29.5891069493, 6.9859255227), (23.0808104612, 10.603593186))
            ThreePointArc((23.0808104612, 10.603593186), (25.353584354, 1.534848658), (24.19140152, -7.7418403819))
            Line((24.19140152, -7.7418403819), (21.0440741561, 0.0022325353))
            Line((21.0440741561, 0.0022325353), (21.043166974, 0))
            Line((21.043166974, 0), (21.0458457391, -10.7156253348))
            ThreePointArc((21.0458457391, -10.7156253348), (28.8887258109, -7.7224495792), (32.1737608344, 0.0027309248))
        make_face()
        with BuildLine():
            ThreePointArc((10.7293890601, -21.441838925), (10.7275353849, -21.2424338153), (10.721975, -21.0430976268))
            Line((10.721975, -21.0430976268), (0, -21.0430976268))
            Line((0, -21.0430976268), (7.7450996927, -24.1903582187))
            ThreePointArc((7.7450996927, -24.1903582187), (-1.5292908827, -25.3539201978), (-10.5965833938, -23.0840295525))
            ThreePointArc((-10.5965833938, -23.0840295525), (0.8267011217, -32.136392342), (10.7293890601, -21.441838925))
        make_face()
    with SkipClean():  # cleaning this boolean's faces spoils the solid; the shape is the same uncleaned
        extrude(amount=-F7_DEPTH)


solid = f1.part
